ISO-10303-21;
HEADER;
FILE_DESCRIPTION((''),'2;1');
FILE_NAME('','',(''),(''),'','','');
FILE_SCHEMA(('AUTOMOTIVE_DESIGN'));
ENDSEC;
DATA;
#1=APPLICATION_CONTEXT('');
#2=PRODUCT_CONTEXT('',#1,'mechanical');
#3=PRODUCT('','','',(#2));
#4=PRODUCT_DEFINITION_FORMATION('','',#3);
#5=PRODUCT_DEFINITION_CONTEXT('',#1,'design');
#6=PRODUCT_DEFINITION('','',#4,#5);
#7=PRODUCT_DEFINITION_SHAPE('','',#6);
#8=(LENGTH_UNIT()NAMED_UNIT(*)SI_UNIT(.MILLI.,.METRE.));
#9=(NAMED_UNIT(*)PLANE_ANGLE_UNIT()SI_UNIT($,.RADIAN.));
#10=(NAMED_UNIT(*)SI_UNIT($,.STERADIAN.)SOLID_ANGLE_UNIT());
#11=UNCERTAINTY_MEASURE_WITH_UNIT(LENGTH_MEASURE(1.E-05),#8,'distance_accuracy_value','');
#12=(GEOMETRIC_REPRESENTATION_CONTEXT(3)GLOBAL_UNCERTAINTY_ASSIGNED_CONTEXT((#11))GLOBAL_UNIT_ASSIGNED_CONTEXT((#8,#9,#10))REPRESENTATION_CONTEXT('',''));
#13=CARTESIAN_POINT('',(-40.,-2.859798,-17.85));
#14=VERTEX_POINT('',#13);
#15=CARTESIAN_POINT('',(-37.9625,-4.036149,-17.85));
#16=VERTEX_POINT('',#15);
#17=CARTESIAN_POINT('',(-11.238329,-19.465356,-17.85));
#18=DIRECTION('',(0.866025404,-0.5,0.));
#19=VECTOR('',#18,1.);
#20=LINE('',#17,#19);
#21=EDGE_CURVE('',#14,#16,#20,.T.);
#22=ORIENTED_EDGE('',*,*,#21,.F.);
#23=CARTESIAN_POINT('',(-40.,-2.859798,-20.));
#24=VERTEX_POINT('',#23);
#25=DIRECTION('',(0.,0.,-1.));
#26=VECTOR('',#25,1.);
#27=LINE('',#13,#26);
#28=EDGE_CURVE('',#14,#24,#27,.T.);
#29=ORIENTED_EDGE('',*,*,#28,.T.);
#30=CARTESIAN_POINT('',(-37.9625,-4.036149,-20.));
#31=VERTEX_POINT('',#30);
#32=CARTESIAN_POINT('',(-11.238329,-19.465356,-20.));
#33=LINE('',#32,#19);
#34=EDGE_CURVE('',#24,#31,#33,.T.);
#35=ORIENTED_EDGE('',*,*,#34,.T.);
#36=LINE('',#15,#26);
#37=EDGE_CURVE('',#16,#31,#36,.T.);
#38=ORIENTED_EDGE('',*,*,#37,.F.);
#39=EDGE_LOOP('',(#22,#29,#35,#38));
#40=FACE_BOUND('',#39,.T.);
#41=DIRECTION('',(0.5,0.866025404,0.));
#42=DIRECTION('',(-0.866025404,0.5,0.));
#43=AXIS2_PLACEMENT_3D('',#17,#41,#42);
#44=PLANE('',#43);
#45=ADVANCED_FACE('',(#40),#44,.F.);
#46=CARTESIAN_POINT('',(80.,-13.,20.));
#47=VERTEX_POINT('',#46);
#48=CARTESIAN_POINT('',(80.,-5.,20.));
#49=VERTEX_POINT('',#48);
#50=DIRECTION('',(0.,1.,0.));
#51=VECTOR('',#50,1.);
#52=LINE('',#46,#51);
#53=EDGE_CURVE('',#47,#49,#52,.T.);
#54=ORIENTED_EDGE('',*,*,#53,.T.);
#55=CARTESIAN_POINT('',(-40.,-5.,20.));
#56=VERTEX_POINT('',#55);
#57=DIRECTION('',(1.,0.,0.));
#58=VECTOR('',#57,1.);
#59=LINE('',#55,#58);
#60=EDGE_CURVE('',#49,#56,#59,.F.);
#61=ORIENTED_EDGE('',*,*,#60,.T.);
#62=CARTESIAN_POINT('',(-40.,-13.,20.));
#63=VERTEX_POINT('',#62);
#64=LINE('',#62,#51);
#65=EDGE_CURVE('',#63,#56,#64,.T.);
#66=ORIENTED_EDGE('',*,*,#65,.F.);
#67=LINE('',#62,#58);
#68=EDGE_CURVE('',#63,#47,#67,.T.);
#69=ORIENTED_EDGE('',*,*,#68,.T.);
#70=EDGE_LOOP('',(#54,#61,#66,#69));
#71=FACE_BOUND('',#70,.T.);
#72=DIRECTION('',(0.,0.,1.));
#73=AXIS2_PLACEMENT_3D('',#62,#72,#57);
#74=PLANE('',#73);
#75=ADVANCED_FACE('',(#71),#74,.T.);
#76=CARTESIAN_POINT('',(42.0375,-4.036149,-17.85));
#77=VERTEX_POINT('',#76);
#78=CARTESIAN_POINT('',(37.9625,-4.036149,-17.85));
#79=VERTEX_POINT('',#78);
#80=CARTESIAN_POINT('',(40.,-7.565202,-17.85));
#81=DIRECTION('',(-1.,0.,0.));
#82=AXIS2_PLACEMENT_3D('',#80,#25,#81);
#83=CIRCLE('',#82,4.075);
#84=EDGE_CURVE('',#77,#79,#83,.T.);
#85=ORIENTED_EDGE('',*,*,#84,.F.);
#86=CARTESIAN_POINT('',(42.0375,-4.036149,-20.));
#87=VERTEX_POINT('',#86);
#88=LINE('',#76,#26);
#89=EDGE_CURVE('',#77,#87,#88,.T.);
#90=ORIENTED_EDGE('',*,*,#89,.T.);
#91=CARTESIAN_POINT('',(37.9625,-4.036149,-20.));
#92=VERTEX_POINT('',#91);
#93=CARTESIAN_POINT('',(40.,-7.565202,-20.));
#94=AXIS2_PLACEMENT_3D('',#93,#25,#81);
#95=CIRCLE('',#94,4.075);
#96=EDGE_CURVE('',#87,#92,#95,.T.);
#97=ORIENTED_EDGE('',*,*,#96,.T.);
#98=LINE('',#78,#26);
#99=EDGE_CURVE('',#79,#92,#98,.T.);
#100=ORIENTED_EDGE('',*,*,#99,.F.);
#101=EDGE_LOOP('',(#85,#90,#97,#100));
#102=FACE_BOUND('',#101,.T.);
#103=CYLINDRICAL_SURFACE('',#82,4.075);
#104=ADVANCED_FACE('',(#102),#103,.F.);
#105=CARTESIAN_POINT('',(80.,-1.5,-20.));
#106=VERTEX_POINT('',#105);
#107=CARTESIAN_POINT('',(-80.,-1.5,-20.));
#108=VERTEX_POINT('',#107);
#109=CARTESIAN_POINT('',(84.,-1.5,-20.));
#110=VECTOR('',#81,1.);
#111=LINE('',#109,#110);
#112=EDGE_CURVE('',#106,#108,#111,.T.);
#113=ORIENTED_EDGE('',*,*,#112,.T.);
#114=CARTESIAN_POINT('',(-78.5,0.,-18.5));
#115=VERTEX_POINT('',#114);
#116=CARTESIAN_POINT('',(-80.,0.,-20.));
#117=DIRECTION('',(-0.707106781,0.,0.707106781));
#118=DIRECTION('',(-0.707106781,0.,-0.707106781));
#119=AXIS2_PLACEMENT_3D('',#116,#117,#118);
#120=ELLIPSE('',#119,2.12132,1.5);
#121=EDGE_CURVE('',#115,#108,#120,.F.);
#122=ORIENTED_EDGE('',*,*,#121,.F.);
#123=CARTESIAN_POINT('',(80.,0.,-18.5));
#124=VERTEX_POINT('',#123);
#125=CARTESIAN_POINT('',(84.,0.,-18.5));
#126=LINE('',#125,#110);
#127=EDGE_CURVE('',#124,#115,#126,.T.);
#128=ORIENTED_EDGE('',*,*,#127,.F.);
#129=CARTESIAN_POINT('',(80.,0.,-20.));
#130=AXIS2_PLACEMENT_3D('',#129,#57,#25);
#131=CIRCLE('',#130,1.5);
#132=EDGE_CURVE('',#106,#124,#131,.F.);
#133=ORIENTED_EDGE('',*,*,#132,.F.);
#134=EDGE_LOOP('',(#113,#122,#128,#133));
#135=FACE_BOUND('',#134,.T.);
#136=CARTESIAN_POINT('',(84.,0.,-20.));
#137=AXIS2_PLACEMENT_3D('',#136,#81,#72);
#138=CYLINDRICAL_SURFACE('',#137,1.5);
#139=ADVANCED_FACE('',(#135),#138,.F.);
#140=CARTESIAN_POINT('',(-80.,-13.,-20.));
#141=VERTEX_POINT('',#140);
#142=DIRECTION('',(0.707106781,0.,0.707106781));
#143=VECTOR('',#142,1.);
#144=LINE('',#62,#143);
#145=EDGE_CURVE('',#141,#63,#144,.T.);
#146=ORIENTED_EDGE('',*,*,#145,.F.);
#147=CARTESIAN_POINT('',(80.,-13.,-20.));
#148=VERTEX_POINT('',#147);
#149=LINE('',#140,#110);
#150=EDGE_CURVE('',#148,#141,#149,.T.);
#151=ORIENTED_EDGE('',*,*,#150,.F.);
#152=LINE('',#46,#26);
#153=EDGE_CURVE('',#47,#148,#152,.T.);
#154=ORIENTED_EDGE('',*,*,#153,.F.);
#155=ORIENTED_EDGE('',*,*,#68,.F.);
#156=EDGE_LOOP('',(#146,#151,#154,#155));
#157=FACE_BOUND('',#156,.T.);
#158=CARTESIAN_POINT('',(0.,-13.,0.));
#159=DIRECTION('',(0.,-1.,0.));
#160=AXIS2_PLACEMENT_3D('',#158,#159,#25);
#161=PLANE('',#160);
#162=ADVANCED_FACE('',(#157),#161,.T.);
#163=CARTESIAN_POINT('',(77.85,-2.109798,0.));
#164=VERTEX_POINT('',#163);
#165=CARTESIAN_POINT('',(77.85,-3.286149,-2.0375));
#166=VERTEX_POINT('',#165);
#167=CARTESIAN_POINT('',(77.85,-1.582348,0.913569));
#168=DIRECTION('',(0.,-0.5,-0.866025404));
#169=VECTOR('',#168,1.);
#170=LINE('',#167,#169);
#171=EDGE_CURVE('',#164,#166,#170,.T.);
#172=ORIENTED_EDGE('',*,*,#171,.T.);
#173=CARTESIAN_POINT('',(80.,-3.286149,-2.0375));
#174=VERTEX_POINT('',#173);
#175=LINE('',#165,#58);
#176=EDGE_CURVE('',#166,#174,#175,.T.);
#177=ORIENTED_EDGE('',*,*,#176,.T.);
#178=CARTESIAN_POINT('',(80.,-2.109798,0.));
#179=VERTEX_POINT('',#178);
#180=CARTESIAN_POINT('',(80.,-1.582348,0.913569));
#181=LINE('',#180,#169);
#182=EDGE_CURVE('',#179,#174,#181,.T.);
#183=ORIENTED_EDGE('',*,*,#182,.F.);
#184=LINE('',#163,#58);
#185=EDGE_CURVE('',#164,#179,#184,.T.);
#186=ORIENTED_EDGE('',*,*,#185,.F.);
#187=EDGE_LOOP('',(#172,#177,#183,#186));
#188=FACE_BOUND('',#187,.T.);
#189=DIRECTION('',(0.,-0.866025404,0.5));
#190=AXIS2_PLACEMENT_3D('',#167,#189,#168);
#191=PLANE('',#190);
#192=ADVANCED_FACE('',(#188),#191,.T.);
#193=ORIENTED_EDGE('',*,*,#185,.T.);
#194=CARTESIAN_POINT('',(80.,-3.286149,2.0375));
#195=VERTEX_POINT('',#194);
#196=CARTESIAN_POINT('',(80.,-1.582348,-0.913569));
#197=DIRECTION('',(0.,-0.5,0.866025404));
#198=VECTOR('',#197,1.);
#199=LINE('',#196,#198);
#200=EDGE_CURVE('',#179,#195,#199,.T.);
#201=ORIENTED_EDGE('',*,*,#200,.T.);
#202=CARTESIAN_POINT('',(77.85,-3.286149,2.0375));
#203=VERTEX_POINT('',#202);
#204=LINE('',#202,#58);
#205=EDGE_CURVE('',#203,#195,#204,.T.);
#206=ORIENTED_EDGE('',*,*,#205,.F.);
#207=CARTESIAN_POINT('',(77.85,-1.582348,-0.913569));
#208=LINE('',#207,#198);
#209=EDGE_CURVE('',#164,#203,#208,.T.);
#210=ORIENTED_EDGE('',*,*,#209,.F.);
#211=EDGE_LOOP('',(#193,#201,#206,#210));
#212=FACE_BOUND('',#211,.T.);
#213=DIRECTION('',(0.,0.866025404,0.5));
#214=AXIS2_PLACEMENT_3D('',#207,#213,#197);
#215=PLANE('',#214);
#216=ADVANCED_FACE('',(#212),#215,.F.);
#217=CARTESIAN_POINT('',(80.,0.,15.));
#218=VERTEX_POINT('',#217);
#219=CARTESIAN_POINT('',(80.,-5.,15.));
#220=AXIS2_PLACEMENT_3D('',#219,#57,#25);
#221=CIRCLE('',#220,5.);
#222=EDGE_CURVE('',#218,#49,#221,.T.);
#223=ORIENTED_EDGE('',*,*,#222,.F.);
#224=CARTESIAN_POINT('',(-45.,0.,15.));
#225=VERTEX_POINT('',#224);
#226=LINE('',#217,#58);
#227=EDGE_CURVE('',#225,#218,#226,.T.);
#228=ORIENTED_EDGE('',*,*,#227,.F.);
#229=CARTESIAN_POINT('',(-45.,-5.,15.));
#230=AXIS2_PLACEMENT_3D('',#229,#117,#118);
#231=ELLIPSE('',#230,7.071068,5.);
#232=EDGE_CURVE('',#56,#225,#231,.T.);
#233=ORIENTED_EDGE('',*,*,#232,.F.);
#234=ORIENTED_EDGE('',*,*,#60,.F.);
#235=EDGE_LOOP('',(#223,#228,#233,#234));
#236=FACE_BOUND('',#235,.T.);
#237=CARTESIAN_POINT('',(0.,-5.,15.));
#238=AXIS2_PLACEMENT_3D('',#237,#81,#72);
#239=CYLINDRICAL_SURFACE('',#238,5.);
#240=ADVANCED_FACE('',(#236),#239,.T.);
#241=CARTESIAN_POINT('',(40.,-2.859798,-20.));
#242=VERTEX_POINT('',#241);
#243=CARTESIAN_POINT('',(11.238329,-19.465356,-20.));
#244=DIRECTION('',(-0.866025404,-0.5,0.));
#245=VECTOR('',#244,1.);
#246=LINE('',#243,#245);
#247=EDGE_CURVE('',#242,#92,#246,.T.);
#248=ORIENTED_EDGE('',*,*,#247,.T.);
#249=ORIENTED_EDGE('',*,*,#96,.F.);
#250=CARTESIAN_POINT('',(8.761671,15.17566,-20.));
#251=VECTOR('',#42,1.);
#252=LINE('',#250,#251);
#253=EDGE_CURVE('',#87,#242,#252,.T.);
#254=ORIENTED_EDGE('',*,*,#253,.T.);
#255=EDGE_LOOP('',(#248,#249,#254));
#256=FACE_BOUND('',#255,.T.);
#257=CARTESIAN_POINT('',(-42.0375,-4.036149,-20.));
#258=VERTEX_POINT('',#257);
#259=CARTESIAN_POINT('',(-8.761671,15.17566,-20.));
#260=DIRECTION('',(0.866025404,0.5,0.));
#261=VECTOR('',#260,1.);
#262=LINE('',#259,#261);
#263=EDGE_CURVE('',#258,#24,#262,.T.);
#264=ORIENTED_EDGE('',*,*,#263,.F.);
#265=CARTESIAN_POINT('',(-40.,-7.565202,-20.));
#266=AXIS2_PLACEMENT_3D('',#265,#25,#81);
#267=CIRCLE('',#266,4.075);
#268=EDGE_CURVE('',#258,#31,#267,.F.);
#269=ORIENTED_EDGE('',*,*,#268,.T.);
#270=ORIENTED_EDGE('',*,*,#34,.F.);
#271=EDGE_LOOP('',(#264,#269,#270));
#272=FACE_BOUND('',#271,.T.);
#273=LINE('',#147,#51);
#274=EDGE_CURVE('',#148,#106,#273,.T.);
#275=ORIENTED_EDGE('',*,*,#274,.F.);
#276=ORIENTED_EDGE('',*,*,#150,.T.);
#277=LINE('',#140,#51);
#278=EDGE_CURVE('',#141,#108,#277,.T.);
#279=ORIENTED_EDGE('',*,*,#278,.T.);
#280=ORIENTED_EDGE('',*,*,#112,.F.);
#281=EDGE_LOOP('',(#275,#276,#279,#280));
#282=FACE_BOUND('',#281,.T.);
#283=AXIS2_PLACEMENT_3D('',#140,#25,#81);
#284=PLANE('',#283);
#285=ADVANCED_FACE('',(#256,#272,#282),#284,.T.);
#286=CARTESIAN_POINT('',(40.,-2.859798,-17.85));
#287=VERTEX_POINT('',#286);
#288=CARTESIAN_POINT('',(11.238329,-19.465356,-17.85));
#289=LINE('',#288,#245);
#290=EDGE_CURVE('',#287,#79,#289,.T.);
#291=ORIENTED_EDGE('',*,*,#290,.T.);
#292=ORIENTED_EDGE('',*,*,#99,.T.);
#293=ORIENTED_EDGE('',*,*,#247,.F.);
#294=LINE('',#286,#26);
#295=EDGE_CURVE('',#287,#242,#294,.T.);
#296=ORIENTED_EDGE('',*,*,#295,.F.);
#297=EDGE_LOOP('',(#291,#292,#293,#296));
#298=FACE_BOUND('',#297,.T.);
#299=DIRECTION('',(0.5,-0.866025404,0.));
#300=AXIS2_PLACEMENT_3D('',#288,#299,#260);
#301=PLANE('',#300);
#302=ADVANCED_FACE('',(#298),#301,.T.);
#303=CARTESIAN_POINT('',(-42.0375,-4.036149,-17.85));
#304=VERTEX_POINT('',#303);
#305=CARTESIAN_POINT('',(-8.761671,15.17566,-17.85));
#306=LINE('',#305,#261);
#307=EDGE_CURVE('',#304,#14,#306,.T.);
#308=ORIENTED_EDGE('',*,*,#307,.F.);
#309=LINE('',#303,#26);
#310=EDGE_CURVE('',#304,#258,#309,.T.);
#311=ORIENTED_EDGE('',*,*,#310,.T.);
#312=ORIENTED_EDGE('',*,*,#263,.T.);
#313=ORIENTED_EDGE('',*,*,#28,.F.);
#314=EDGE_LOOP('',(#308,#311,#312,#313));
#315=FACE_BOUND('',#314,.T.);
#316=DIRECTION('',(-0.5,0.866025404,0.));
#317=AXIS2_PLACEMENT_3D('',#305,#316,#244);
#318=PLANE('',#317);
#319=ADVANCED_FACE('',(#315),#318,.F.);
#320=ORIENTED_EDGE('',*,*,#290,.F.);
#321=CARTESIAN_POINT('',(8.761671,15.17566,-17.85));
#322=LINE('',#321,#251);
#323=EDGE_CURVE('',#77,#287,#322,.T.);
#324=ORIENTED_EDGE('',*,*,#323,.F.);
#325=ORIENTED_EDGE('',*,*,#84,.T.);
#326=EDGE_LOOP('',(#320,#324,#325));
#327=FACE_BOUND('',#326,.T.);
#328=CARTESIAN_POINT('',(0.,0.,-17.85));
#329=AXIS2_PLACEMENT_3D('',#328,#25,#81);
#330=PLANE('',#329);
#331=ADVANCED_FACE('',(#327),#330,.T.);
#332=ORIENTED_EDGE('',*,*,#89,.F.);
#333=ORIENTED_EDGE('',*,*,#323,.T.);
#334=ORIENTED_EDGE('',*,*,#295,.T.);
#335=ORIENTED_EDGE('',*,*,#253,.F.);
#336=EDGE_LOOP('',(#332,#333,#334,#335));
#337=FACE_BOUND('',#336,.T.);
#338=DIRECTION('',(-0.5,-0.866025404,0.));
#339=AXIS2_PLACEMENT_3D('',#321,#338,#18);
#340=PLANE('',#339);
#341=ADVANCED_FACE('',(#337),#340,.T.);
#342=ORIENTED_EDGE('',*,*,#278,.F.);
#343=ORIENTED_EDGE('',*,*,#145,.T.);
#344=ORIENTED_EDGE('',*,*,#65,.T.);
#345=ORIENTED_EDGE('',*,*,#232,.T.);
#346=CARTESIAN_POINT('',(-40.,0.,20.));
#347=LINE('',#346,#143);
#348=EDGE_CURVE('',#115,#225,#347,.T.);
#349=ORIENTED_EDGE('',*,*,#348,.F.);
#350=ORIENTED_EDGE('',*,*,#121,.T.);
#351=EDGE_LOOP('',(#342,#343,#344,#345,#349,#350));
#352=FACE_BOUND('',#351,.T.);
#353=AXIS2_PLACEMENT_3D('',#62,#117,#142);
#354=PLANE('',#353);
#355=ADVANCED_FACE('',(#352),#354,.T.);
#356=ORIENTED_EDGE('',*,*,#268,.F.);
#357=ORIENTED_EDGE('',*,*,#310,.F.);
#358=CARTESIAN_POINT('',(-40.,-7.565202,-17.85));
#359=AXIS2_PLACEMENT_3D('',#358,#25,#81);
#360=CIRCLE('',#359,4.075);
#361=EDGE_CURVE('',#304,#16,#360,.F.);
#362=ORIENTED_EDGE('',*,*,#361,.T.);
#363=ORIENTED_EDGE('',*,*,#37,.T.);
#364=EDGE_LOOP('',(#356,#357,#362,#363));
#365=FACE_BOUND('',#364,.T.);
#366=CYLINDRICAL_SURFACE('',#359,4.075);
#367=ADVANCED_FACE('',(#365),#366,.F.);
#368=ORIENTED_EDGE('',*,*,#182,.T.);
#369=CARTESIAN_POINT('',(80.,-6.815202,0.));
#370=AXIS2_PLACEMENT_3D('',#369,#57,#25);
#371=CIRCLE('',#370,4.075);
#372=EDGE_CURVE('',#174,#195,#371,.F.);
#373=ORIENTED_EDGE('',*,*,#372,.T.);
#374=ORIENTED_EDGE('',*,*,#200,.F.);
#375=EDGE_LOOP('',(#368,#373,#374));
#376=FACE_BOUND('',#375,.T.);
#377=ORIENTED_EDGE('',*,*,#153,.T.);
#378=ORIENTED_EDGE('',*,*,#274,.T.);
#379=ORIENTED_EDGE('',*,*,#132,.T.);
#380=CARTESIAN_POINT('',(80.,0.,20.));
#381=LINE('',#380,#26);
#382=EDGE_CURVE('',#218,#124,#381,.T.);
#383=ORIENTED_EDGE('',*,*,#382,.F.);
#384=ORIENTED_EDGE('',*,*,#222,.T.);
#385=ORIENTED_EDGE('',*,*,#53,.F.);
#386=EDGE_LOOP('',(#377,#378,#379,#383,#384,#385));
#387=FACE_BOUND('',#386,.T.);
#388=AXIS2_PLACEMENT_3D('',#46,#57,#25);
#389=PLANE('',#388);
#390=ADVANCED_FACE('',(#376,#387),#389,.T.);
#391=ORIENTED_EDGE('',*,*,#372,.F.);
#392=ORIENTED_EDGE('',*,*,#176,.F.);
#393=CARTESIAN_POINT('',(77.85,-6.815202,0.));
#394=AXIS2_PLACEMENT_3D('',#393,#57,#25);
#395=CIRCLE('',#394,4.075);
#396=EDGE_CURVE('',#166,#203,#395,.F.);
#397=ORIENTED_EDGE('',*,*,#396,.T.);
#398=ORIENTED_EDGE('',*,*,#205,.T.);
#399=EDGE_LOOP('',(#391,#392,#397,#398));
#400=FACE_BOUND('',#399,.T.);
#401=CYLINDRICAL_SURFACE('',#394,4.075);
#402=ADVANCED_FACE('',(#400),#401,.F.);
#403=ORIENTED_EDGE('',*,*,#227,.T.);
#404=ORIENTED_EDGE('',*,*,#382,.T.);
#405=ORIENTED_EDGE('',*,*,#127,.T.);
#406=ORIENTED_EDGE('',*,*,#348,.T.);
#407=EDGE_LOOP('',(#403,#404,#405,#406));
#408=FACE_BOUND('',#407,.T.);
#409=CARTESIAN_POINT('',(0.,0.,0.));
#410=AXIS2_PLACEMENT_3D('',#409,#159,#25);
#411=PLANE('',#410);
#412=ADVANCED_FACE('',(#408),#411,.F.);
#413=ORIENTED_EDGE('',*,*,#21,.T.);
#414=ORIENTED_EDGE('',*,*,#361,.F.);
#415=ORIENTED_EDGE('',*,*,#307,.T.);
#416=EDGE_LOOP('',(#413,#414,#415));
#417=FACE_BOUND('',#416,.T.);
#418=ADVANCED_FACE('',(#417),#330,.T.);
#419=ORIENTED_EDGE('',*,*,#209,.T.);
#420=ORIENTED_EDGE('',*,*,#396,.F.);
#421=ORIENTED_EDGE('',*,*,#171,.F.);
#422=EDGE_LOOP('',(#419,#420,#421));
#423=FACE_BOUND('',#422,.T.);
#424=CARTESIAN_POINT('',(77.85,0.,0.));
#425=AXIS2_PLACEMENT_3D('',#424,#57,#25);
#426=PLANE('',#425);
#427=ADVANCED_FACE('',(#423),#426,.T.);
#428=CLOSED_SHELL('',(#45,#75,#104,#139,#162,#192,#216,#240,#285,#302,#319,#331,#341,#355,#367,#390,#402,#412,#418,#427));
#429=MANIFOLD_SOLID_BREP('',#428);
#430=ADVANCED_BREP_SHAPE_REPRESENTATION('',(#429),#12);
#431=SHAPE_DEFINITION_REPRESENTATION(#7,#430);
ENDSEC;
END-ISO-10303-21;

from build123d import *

# Parameters (mm, degrees)
EXTRUDE_1_DEPTH     = 13
SWEEP_START         = -80
SWEEP_1_DEPTH       = 160
SKETCH_6_R          = 4.075
CUT_EXTRUDE_1_DEPTH = 2.15
FILLET_1_R          = 5
SKETCH_7_R          = 4.075
CUT_EXTRUDE_2_DEPTH = 2.15


# Read off the part's stored shape, not the designer's step: Вырез-По траектории1
with BuildPart() as part:
    # Эскиз1 → Бобышка-Вытянуть1 (new body)
    with BuildSketch(Plane(origin=(0, 0, 0), x_dir=(1, 0, 0), z_dir=(0, 1, 0))):
        Polygon((-40, -20), (80, -20), (80, 20), (-80, 20), align=None)
    extrude(amount=-EXTRUDE_1_DEPTH)

    # Вырез-По траектории1 outline → Вырез-По траектории1 (cut)
    with BuildSketch(Plane.YZ.offset(SWEEP_START)):
        with BuildLine():
            ThreePointArc((0, -18.5), (-1.060660172, -18.939339828), (-1.5, -20))
            Line((-1.5, -20), (0, -20))
            Line((0, -20), (0, -18.5))
        make_face()
    extrude(amount=SWEEP_1_DEPTH, mode=Mode.SUBTRACT)

    # Эскиз6 → Вырез-Вытянуть1 (cut)
    with BuildSketch(Plane(origin=(0, 0, -20), x_dir=(-1, 0, 0), z_dir=(0, 0, -1))):
        with Locations((-40, -7.565202347)):
            Circle(SKETCH_6_R)
        with BuildLine():
            Line((-40, -2.859797653), (-42.0375, -4.036148827))
            ThreePointArc((-42.0375, -4.036148827), (-40, -3.490202347), (-37.9625, -4.036148827))
            Line((-37.9625, -4.036148827), (-40, -2.859797653))
        make_face()
        with Locations((40, -7.565202347)):
            Circle(SKETCH_6_R)
        with BuildLine():
            ThreePointArc((37.9625, -4.036148827), (40, -3.490202347), (42.0375, -4.036148827))
            Line((42.0375, -4.036148827), (40, -2.859797653))
            Line((40, -2.859797653), (37.9625, -4.036148827))
        make_face()
    extrude(amount=-CUT_EXTRUDE_1_DEPTH, mode=Mode.SUBTRACT)

    # Скругление1
    fillet_1_edges = [part.edges().sort_by_distance(p)[0] for p in [
        (20, 0, 20),
    ]]
    fillet(fillet_1_edges, radius=FILLET_1_R)

    # Эскиз7 → Вырез-Вытянуть2 (cut)
    with BuildSketch(Plane.ZY.offset(-80)):
        with Locations((0, -6.815202347)):
            Circle(SKETCH_7_R)
        with BuildLine():
            Line((2.0375, -3.286148827), (0, -2.109797653))
            Line((0, -2.109797653), (-2.0375, -3.286148827))
            ThreePointArc((-2.0375, -3.286148827), (0, -2.740202347), (2.0375, -3.286148827))
        make_face()
    extrude(amount=CUT_EXTRUDE_2_DEPTH, mode=Mode.SUBTRACT)


solid = part.part
